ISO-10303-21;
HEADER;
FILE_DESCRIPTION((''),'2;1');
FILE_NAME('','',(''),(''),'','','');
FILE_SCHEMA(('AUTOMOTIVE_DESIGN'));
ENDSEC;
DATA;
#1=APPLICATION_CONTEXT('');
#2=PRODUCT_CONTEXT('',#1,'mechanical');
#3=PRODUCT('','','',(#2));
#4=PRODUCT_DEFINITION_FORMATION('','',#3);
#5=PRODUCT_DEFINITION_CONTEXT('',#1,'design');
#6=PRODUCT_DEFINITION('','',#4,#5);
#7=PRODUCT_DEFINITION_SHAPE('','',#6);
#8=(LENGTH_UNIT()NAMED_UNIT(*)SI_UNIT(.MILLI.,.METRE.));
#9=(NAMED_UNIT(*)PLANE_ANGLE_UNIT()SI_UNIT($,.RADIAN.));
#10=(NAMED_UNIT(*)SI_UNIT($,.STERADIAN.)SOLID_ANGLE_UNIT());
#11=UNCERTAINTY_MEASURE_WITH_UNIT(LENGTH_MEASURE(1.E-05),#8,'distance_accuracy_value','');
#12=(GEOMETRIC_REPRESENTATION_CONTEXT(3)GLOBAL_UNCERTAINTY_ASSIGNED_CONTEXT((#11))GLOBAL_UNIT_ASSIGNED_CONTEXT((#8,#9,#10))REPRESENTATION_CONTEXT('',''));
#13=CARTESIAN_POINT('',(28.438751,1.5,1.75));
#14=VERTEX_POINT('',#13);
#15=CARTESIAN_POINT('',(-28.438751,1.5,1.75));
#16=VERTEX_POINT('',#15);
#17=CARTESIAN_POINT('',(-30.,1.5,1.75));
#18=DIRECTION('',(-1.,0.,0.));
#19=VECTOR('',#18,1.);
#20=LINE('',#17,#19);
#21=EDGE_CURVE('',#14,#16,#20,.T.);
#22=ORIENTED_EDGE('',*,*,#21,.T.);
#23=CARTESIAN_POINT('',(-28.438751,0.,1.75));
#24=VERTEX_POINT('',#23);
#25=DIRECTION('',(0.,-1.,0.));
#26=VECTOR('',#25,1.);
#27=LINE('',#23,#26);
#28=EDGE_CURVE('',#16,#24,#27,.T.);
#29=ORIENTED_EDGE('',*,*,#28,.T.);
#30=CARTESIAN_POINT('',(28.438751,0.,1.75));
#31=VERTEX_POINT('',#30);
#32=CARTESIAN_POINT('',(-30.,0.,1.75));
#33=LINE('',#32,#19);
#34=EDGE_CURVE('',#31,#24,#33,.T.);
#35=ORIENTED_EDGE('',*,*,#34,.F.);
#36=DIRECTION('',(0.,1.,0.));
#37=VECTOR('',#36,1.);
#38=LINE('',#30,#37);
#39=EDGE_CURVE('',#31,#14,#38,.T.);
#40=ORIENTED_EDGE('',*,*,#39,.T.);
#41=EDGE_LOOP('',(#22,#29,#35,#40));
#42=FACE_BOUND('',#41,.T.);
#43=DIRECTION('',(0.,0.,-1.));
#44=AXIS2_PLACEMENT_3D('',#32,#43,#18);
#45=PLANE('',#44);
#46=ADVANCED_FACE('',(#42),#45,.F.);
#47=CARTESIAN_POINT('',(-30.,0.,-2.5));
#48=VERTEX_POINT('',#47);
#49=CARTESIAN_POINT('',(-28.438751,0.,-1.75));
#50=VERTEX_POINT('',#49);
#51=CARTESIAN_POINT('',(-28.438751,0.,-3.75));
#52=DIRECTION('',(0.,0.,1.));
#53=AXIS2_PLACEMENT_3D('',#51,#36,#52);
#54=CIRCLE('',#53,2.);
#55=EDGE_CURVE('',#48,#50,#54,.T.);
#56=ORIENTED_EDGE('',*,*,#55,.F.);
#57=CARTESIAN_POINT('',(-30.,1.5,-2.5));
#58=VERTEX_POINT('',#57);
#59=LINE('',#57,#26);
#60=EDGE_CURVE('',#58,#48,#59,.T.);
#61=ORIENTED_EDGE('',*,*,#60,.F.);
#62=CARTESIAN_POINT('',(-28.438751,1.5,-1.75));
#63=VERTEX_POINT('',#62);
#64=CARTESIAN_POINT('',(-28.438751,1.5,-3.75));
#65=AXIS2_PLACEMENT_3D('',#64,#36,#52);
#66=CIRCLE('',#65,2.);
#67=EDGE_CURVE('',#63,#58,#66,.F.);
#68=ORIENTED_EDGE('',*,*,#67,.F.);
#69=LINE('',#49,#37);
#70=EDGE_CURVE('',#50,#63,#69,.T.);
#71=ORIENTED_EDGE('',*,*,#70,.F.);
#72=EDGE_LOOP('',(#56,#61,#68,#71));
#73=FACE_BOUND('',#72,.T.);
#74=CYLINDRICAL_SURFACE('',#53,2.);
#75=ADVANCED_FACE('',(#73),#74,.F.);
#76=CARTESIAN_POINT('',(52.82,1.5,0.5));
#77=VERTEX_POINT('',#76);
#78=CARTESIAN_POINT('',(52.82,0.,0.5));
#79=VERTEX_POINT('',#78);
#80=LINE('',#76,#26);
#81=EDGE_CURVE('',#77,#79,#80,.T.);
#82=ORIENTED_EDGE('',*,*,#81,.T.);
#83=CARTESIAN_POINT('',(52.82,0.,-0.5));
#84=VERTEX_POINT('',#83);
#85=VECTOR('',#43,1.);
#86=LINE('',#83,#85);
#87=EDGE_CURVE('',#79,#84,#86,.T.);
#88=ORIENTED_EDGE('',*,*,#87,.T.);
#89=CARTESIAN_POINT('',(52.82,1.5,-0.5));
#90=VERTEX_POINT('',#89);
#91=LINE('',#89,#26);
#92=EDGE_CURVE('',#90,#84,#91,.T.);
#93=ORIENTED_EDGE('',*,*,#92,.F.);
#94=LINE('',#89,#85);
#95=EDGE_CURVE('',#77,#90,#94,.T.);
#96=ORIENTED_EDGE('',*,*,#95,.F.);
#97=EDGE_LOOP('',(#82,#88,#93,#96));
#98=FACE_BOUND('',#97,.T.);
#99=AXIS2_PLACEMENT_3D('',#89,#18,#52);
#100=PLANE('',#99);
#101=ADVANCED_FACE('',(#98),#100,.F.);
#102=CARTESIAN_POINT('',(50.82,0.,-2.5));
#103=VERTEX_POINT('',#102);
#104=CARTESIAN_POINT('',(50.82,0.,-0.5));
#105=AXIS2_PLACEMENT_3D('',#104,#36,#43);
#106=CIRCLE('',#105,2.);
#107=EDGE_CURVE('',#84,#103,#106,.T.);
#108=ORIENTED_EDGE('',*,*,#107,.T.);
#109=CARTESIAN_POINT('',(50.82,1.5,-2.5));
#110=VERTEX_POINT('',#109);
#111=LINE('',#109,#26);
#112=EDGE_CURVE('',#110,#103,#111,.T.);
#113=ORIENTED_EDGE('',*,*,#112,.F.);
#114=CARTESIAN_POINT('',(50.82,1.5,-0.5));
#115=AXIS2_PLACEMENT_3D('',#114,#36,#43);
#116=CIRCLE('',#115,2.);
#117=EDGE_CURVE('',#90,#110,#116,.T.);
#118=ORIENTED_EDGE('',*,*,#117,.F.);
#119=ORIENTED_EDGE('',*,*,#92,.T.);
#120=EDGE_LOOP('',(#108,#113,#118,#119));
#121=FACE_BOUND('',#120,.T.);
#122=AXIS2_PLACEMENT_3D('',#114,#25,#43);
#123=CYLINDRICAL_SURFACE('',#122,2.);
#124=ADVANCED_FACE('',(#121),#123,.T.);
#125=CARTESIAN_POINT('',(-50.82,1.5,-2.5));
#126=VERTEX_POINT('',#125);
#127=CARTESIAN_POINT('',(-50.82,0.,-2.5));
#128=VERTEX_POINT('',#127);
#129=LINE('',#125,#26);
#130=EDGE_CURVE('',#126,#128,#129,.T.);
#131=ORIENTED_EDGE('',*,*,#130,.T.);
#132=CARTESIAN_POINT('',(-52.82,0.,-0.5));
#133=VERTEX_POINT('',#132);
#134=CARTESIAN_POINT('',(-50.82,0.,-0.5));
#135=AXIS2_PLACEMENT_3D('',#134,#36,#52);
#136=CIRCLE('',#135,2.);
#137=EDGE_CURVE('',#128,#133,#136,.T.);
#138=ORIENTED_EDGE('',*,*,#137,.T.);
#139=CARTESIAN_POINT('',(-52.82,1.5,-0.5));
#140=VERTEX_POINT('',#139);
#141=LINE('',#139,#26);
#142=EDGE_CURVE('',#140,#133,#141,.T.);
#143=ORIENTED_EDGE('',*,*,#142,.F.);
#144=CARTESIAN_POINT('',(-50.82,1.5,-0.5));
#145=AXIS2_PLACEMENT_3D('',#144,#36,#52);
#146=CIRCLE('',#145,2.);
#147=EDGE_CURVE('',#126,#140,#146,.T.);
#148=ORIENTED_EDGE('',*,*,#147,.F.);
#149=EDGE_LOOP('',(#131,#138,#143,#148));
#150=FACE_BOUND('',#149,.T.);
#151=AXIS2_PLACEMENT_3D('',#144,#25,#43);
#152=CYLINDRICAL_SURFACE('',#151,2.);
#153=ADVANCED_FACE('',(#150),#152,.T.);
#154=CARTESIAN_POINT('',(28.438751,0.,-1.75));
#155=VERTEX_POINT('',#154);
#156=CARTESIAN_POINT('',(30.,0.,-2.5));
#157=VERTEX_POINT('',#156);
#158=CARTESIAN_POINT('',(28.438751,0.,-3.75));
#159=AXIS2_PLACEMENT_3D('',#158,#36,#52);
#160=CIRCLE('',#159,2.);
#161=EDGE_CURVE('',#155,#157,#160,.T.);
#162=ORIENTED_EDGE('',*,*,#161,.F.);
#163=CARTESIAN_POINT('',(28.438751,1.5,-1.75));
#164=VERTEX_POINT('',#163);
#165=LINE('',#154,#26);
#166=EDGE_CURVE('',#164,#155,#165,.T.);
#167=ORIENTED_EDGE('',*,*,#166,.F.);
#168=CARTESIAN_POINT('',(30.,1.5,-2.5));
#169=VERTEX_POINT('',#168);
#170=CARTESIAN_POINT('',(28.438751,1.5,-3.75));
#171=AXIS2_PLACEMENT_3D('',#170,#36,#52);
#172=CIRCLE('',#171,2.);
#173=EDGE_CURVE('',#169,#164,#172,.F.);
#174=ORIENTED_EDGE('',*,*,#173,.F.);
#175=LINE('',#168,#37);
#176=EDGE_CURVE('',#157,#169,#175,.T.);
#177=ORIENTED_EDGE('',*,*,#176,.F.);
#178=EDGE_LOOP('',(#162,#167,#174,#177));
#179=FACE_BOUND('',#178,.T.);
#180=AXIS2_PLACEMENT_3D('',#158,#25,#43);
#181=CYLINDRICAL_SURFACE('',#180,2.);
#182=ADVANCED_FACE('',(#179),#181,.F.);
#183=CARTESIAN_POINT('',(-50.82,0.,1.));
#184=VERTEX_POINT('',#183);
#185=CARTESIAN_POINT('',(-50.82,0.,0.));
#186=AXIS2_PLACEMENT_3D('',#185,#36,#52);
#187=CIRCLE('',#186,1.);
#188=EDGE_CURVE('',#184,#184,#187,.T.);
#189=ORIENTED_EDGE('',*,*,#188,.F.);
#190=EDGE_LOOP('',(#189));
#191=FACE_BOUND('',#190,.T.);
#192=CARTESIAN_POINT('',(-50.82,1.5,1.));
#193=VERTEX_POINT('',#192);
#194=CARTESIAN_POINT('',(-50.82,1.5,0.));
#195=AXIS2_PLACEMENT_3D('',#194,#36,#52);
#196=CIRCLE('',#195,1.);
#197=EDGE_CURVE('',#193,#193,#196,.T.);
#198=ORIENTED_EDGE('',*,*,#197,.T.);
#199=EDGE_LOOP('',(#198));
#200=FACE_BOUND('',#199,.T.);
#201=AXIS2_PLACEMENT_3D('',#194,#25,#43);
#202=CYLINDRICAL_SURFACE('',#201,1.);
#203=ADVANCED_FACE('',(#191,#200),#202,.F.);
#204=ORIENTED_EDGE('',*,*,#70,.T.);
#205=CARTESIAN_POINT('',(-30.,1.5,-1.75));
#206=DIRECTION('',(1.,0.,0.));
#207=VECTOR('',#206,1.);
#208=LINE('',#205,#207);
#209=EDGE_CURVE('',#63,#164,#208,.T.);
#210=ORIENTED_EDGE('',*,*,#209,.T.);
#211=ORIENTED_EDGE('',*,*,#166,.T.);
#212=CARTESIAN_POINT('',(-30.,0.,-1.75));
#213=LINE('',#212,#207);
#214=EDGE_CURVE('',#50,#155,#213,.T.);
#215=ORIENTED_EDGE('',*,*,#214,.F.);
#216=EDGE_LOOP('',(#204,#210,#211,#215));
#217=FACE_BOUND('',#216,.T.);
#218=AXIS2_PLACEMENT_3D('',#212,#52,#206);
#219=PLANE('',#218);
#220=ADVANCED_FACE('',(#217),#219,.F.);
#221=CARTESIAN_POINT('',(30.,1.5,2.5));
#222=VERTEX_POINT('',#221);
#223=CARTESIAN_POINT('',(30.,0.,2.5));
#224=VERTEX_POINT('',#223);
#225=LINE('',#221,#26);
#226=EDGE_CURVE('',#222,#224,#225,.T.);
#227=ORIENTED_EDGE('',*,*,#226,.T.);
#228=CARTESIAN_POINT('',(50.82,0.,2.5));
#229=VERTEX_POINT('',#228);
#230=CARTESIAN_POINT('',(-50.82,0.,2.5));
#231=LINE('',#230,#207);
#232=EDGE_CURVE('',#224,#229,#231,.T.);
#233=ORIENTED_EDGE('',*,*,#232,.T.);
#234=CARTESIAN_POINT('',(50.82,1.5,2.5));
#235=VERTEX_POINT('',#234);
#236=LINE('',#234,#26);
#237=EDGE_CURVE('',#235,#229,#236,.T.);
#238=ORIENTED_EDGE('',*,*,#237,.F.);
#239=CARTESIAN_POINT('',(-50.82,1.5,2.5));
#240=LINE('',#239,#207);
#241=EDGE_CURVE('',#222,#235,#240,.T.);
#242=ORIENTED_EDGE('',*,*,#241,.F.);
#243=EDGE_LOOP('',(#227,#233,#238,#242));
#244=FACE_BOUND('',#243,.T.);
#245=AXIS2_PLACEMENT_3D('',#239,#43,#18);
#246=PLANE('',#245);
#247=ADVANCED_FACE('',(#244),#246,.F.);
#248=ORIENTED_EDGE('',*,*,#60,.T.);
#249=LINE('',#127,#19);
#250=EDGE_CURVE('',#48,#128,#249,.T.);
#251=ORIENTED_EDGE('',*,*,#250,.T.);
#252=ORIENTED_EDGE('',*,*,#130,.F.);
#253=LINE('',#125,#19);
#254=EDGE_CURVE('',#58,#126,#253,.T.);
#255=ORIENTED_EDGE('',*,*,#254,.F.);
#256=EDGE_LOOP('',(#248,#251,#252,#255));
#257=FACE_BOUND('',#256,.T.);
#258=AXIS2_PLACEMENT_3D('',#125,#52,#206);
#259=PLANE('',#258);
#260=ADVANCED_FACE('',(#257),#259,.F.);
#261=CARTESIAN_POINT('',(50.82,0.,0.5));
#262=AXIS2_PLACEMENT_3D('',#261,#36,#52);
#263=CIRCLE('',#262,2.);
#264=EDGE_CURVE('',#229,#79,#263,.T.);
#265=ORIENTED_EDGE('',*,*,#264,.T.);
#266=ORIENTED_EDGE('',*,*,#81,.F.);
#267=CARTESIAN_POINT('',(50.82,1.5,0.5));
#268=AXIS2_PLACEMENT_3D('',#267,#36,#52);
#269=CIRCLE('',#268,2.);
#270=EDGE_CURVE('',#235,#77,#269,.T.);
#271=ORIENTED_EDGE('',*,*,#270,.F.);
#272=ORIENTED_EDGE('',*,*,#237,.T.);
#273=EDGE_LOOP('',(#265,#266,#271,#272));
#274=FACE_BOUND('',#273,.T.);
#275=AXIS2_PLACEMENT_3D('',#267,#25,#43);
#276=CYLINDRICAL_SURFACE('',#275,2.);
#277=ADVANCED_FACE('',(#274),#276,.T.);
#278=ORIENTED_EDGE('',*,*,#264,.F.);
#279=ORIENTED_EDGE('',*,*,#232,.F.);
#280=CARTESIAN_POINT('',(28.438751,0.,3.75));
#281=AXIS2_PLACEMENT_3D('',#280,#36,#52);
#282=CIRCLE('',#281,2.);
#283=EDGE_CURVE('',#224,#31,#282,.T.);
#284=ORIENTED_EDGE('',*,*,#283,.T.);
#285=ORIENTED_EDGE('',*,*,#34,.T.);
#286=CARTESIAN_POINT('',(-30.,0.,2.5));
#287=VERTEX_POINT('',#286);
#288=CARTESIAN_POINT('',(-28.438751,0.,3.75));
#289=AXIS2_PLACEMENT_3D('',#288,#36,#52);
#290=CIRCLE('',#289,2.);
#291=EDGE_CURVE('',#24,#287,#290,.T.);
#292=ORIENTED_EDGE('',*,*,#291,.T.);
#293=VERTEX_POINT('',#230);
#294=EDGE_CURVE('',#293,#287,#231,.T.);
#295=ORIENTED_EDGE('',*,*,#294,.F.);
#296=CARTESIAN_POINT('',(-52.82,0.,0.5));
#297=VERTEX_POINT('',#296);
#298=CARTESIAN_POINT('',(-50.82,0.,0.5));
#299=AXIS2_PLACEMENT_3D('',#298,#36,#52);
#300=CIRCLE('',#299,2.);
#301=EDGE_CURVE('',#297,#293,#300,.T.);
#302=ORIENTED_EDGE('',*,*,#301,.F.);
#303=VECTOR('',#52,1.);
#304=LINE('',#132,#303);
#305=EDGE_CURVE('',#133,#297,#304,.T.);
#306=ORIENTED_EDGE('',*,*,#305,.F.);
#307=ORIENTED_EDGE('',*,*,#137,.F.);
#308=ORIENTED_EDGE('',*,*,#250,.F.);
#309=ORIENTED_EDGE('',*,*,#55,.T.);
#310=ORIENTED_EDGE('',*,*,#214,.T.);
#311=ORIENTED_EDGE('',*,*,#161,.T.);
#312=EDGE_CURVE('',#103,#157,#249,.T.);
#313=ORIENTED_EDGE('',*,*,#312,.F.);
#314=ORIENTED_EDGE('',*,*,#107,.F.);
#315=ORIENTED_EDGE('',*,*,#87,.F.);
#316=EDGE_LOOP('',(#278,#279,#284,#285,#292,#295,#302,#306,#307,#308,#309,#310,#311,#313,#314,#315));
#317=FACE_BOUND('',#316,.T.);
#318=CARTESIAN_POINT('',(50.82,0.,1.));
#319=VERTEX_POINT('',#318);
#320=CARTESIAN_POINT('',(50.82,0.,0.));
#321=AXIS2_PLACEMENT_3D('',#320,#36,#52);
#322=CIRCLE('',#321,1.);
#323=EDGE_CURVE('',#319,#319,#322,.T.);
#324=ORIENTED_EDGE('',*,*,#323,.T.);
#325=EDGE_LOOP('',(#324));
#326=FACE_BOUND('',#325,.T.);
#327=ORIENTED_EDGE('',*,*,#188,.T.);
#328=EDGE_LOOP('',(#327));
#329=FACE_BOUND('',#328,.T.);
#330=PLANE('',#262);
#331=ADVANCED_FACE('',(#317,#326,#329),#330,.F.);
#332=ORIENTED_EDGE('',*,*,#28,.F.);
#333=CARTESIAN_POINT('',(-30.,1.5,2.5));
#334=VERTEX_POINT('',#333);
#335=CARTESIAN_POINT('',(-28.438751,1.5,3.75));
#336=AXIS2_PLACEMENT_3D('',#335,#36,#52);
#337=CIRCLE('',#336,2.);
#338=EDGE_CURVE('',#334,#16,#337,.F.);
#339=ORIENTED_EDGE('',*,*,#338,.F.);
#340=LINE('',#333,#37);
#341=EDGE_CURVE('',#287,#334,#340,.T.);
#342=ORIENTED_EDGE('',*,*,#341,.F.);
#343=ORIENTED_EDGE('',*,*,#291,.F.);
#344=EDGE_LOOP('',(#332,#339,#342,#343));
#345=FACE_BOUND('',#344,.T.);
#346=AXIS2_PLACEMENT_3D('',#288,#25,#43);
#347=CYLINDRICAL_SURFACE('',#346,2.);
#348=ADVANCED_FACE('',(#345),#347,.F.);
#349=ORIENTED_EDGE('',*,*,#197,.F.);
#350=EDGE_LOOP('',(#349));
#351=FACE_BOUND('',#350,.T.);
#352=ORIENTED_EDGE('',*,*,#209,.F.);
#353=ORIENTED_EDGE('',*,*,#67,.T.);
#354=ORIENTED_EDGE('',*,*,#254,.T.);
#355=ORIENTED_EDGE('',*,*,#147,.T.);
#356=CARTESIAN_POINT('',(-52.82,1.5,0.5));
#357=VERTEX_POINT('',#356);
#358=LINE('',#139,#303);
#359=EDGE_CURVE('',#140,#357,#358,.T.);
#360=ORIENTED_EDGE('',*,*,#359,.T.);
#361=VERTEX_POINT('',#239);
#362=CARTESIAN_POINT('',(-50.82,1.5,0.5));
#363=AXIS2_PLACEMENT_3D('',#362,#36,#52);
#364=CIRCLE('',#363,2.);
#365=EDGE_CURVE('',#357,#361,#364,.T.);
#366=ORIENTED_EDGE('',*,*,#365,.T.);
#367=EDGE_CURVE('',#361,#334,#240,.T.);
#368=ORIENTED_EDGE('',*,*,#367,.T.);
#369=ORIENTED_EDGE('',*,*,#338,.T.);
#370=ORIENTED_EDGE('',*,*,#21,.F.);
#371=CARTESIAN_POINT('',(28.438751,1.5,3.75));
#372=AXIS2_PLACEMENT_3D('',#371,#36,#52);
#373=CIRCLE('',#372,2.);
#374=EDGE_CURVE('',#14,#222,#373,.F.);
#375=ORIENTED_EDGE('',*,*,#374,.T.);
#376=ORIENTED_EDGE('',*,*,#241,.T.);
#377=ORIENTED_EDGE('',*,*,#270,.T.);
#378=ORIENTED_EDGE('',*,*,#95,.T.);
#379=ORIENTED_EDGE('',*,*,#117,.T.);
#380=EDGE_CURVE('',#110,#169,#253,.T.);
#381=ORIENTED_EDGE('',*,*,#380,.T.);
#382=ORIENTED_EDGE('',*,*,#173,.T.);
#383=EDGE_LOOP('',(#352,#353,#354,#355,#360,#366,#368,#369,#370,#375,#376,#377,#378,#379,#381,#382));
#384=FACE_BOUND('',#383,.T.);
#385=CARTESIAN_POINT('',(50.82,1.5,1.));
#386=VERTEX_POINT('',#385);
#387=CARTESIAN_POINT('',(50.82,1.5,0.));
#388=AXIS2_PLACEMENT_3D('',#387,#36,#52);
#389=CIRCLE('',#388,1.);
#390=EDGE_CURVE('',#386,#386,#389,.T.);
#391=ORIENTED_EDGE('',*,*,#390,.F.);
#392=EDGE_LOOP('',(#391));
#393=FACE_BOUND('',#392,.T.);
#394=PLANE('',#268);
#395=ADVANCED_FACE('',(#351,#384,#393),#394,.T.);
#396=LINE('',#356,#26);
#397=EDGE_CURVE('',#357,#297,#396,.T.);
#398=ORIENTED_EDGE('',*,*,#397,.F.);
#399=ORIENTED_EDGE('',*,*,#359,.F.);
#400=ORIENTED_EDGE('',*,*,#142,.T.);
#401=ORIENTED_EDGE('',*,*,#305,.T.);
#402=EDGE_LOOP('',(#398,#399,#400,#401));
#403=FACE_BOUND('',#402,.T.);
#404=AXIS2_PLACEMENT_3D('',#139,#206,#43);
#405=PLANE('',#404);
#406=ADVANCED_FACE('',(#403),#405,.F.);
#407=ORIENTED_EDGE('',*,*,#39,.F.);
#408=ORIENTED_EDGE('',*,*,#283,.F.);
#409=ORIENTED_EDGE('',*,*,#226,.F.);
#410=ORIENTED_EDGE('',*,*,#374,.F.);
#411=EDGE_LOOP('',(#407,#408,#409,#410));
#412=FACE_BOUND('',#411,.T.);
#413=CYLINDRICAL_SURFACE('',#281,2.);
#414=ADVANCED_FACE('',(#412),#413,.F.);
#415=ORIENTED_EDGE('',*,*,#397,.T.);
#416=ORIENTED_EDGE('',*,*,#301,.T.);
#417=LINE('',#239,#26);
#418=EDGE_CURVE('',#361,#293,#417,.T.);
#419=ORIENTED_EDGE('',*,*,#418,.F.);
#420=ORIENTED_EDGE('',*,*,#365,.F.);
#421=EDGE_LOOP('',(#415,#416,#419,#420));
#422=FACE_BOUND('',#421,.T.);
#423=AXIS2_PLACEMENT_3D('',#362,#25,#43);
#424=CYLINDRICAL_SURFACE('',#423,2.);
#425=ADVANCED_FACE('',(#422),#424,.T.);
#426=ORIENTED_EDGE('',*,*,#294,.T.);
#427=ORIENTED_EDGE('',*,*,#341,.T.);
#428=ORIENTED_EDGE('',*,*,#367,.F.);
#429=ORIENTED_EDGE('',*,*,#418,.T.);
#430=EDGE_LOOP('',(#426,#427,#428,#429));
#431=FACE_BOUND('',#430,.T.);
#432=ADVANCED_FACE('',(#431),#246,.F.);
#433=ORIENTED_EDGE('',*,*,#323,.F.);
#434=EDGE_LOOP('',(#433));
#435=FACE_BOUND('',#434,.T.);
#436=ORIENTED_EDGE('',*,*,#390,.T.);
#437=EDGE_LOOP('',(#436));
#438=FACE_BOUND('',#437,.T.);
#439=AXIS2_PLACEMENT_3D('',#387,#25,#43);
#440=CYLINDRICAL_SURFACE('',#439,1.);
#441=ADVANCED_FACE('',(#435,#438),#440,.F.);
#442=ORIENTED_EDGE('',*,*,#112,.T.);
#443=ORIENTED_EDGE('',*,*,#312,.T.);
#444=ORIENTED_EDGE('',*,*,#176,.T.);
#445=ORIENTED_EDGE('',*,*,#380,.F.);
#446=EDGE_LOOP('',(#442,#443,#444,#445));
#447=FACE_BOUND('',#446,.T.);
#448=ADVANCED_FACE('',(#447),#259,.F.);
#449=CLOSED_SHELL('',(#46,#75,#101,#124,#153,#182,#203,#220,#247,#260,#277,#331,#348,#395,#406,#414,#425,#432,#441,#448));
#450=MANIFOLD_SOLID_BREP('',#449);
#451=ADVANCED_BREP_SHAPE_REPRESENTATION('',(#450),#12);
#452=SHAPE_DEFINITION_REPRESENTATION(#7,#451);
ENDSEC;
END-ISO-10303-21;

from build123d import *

# Parameters (mm, degrees)
SKETCH2_R           = 1
BOSS_EXTRUDE1_DEPTH = 1.5
SKETCH3_W           = 60
SKETCH3_H           = 1.5
CUT_EXTRUDE1_DEPTH  = 53.900400755
FILLET1_R           = 2


with BuildPart() as part:
    # Sketch2 → Boss-Extrude1 (new body)
    with BuildSketch(Plane(origin=(0, 0, 0), x_dir=(1, 0, 0), z_dir=(0, 1, 0))):
        with BuildLine():
            Line((-50.82, 2.5), (50.82, 2.5))
            ThreePointArc((50.82, 2.5), (52.234213562, 1.914213562), (52.82, 0.5))
            Line((52.82, 0.5), (52.82, -0.5))
            ThreePointArc((52.82, -0.5), (52.234213562, -1.914213562), (50.82, -2.5))
            Line((50.82, -2.5), (-50.82, -2.5))
            ThreePointArc((-50.82, -2.5), (-52.234213562, -1.914213562), (-52.82, -0.5))
            Line((-52.82, -0.5), (-52.82, 0.5))
            ThreePointArc((-52.82, 0.5), (-52.234213562, 1.914213562), (-50.82, 2.5))
        make_face()
        with Locations(Location((-50.82, 0, 0), (0, 0, 270))):
            Circle(SKETCH2_R, mode=Mode.SUBTRACT)
        with Locations(Location((50.82, 0, 0), (0, 0, 270))):
            Circle(SKETCH2_R, mode=Mode.SUBTRACT)
    extrude(amount=BOSS_EXTRUDE1_DEPTH)

    # Sketch3 → Cut-Extrude1 (cut, through all)
    with BuildSketch(Plane(origin=(0, 1.5, 0), x_dir=(1, 0, 0), z_dir=(0, 1, 0))):
        with Locations((0, 2.5)):
            Rectangle(SKETCH3_W, SKETCH3_H)
        with Locations((0, -2.5)):
            Rectangle(SKETCH3_W, SKETCH3_H)
    extrude(amount=-CUT_EXTRUDE1_DEPTH, mode=Mode.SUBTRACT)

    # Fillet1
    # the kernel refuses this fillet: 2 mm, written as the material it adds along each edge
    with BuildSketch(Plane(origin=(30, 1.5, -1.75), x_dir=(0, 0, -1), z_dir=(0, -1, 0)), Plane(origin=(-30, 1.5, 1.75), x_dir=(0, 0, 1), z_dir=(0, -1, 0))) as fillet1_piece_1:
        with BuildLine():
            CenterArc((2, -1.5612495), FILLET1_R, 128.682187453, 51.317812547)
            Line((0, -1.5612495), (-0.04, -1.5612495))
            Line((-0.04, -1.5612495), (-0.04, 0))
            Line((-0.04, 0), (0, 0.04))
            ThreePointArc((0, 0.04), (0.375, 0.04), (0.725, 0.03122499))
            Line((0.725, 0.03122499), (0.75, 0))
        make_face()
    extrude(amount=1.5)
    with BuildSketch(Plane(origin=(30, 1.5, 1.75), x_dir=(-1, 0, 0), z_dir=(0, -1, 0))) as fillet1_piece_2:
        with BuildLine():
            CenterArc((1.5612495, -2), FILLET1_R, 90, 51.317812547)
            Line((0, -0.75), (-0.03122499, -0.725))
            ThreePointArc((-0.03122499, -0.725), (-0.04, -0.375), (-0.04, 0))
            Line((-0.04, 0), (0, 0.04))
            Line((0, 0.04), (1.5612495, 0.04))
            Line((1.5612495, 0.04), (1.5612495, 0))
        make_face()
    extrude(amount=1.5)
    with BuildSketch(Plane(origin=(-30, 1.5, -1.75), x_dir=(0, 0, -1), z_dir=(0, -1, 0))) as fillet1_piece_3:
        with BuildLine():
            CenterArc((2, 1.5612495), FILLET1_R, 180, 51.317812547)
            Line((0, 1.5612495), (-0.04, 1.5612495))
            Line((-0.04, 1.5612495), (-0.04, 0))
            Line((-0.04, 0), (0, -0.04))
            ThreePointArc((0, -0.04), (0.375, -0.04), (0.725, -0.03122499))
            Line((0.725, -0.03122499), (0.75, 0))
        make_face()
    extrude(amount=1.5)


solid = part.part
